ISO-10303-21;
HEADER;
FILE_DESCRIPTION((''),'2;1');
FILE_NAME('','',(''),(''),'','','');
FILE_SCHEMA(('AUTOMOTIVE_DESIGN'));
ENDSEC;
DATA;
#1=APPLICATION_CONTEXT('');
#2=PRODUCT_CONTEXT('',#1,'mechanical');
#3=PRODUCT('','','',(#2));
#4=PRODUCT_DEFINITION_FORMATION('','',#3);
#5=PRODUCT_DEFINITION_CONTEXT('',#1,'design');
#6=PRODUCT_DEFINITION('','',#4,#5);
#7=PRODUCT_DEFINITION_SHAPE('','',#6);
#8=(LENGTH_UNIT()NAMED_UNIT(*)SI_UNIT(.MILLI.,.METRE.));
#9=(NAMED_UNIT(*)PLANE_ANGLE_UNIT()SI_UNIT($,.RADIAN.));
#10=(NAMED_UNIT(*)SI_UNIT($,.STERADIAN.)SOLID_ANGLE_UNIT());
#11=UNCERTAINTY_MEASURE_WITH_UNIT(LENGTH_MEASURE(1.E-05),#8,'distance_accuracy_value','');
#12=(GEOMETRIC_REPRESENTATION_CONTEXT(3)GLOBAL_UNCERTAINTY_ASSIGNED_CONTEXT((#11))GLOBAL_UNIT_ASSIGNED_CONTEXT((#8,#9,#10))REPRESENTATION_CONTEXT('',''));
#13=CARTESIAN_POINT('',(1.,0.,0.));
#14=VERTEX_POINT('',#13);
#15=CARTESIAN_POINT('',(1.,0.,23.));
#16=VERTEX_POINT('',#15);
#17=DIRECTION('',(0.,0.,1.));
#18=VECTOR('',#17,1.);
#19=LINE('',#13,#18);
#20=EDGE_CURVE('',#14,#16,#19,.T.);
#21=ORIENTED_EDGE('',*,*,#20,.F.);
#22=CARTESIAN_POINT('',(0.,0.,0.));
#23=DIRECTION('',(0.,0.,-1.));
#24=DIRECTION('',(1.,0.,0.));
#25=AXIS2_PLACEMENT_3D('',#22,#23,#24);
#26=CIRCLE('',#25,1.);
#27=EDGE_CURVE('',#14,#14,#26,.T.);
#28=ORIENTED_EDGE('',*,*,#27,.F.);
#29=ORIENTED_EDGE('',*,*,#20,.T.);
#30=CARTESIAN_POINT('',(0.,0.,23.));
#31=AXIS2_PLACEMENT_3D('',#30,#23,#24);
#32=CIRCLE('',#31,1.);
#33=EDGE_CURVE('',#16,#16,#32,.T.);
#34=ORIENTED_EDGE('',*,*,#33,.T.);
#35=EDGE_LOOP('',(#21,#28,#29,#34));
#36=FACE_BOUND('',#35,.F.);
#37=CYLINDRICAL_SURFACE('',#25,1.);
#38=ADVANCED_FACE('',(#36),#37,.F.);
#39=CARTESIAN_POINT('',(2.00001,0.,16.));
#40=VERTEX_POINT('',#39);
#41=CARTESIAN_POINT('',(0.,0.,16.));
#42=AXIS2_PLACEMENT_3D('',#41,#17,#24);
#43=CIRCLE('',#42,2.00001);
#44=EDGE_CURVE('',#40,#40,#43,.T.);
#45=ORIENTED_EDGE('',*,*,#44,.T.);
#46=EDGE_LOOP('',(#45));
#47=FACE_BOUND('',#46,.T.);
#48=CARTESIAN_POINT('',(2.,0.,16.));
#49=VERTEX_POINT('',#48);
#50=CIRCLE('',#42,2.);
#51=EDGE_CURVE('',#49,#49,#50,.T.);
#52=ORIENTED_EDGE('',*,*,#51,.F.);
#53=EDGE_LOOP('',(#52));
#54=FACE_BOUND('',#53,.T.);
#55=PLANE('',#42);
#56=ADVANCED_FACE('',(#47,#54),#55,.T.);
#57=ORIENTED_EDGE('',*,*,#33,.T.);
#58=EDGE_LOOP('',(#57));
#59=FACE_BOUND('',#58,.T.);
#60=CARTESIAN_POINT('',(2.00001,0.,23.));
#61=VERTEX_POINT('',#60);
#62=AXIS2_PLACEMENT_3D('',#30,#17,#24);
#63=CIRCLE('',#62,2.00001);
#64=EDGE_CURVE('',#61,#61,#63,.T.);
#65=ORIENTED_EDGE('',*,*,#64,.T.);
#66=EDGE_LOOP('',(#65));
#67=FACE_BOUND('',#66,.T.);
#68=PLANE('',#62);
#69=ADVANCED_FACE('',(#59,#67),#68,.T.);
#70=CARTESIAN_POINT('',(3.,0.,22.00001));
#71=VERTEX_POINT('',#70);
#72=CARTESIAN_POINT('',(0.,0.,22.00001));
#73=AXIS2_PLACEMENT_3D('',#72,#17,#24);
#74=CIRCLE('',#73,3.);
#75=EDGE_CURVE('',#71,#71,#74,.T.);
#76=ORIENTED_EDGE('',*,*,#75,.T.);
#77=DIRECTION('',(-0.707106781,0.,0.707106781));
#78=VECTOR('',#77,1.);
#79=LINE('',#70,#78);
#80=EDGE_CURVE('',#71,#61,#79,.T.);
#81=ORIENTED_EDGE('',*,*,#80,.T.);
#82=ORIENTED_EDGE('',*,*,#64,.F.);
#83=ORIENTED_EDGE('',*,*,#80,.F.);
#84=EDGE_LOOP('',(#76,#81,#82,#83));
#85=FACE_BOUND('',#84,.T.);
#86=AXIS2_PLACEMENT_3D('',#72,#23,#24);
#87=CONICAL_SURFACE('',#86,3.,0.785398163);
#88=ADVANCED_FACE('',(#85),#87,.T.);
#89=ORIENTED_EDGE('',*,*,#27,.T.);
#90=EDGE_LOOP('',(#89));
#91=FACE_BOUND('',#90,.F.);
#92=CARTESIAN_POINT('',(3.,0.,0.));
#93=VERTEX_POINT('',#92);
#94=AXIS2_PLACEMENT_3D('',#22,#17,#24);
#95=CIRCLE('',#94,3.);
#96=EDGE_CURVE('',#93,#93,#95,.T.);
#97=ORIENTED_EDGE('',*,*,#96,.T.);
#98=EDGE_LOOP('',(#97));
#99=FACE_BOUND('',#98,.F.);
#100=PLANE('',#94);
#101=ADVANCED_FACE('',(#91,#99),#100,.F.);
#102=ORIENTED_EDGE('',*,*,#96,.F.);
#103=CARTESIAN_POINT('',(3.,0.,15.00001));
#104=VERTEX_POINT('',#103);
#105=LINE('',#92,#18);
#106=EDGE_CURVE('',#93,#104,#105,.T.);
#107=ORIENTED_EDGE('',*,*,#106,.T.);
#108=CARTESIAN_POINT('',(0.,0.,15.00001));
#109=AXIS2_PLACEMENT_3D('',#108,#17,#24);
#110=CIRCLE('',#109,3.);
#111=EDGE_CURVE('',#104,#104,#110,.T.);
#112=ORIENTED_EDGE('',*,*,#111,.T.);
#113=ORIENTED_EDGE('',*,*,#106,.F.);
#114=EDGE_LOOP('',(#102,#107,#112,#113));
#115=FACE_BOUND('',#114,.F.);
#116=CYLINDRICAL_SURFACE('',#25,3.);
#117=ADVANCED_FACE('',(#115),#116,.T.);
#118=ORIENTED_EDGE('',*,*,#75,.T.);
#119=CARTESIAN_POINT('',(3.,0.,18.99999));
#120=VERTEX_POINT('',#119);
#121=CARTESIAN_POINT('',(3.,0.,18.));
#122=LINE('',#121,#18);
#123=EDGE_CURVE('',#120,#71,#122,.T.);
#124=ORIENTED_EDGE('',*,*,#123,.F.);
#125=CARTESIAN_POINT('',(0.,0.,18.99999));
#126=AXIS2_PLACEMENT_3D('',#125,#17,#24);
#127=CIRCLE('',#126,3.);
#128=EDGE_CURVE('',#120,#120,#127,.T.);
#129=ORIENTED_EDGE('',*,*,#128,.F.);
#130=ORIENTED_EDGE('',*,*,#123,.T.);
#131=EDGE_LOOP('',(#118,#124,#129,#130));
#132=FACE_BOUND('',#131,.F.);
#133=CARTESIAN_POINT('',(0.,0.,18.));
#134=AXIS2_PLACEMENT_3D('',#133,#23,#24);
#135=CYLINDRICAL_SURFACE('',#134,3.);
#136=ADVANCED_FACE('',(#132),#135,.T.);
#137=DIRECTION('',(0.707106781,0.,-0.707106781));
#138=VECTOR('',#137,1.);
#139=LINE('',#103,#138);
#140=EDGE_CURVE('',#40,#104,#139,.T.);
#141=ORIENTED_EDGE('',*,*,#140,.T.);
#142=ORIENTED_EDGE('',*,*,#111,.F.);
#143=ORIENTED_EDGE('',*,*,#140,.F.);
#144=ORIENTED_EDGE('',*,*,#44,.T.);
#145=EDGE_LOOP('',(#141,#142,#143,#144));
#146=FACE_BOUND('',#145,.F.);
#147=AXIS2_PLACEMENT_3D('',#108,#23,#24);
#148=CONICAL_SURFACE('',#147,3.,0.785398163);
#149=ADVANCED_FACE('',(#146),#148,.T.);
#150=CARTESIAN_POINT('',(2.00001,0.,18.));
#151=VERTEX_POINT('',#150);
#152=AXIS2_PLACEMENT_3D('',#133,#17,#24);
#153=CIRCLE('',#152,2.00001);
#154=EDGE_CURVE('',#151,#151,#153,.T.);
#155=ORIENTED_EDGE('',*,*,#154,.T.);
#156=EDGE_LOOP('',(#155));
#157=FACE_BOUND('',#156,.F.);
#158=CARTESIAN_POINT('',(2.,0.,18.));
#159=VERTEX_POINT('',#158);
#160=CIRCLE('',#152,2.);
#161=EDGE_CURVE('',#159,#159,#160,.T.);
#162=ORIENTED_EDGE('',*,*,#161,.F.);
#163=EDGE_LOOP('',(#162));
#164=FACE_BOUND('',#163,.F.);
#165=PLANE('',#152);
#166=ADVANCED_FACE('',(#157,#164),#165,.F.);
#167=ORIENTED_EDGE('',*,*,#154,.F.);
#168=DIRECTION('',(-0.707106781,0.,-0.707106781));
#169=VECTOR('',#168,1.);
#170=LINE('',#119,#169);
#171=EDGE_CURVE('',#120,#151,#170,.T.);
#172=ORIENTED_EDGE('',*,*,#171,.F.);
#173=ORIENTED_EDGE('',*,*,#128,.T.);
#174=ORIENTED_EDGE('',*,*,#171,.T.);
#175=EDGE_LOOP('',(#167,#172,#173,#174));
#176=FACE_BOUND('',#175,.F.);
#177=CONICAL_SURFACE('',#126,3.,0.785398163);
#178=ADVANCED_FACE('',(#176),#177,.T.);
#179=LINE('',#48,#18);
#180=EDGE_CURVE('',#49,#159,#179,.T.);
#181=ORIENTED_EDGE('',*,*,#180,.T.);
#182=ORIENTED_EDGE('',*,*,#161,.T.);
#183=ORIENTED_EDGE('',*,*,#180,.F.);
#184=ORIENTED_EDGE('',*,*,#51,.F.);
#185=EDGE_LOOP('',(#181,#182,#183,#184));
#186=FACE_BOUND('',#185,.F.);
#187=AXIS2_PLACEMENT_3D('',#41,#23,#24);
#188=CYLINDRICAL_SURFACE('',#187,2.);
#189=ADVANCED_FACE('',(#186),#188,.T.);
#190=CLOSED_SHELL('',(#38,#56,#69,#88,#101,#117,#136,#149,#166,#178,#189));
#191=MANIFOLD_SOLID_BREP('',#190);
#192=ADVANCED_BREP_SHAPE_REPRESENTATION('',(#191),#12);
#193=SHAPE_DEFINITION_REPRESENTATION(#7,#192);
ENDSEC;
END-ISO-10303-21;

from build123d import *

# Parameters (mm, degrees)
F0_R     = 3
F1_DEPTH = 16
F2_R     = 2
F3_DEPTH = 2
F4_R     = 3
F5_DEPTH = 5
F6_SIZE  = 0.99999
F7_R     = 1
F8_DEPTH = 25


# Not quite as in the source:
# - a fillet or chamfer is up to 0.001 mm smaller than in the source, because OpenCascade refuses the exact size


with BuildPart() as f1:
    # F0 (on Top) → F1 (new body)
    with BuildSketch(Plane.XY):
        Circle(F0_R)
    extrude(amount=F1_DEPTH)

    # F2 (on face) → F3 (join)
    with BuildSketch(Plane.XY.offset(16)):
        Circle(F2_R)
    extrude(amount=F3_DEPTH)

    # F4 (on face) → F5 (join)
    with BuildSketch(Plane.XY.offset(18)):
        Circle(F4_R)
    extrude(amount=F5_DEPTH)

    # F6 (size 1 in the source; OpenCascade refuses exactly that, so slightly less here)
    f6_edges = [f1.edges().sort_by_distance(p)[0] for p in [
        (-3, 0, 23),
        (-3, 0, 18),
        (-3, 0, 16),
    ]]
    chamfer(f6_edges, length=F6_SIZE)

    # F7 (on face) → F8 (cut)
    with BuildSketch(Plane(origin=(0, 0, 0), x_dir=(1, 0, 0), z_dir=(0, 0, -1))):
        Circle(F7_R)
    extrude(amount=-F8_DEPTH, mode=Mode.SUBTRACT)


solid = f1.part
